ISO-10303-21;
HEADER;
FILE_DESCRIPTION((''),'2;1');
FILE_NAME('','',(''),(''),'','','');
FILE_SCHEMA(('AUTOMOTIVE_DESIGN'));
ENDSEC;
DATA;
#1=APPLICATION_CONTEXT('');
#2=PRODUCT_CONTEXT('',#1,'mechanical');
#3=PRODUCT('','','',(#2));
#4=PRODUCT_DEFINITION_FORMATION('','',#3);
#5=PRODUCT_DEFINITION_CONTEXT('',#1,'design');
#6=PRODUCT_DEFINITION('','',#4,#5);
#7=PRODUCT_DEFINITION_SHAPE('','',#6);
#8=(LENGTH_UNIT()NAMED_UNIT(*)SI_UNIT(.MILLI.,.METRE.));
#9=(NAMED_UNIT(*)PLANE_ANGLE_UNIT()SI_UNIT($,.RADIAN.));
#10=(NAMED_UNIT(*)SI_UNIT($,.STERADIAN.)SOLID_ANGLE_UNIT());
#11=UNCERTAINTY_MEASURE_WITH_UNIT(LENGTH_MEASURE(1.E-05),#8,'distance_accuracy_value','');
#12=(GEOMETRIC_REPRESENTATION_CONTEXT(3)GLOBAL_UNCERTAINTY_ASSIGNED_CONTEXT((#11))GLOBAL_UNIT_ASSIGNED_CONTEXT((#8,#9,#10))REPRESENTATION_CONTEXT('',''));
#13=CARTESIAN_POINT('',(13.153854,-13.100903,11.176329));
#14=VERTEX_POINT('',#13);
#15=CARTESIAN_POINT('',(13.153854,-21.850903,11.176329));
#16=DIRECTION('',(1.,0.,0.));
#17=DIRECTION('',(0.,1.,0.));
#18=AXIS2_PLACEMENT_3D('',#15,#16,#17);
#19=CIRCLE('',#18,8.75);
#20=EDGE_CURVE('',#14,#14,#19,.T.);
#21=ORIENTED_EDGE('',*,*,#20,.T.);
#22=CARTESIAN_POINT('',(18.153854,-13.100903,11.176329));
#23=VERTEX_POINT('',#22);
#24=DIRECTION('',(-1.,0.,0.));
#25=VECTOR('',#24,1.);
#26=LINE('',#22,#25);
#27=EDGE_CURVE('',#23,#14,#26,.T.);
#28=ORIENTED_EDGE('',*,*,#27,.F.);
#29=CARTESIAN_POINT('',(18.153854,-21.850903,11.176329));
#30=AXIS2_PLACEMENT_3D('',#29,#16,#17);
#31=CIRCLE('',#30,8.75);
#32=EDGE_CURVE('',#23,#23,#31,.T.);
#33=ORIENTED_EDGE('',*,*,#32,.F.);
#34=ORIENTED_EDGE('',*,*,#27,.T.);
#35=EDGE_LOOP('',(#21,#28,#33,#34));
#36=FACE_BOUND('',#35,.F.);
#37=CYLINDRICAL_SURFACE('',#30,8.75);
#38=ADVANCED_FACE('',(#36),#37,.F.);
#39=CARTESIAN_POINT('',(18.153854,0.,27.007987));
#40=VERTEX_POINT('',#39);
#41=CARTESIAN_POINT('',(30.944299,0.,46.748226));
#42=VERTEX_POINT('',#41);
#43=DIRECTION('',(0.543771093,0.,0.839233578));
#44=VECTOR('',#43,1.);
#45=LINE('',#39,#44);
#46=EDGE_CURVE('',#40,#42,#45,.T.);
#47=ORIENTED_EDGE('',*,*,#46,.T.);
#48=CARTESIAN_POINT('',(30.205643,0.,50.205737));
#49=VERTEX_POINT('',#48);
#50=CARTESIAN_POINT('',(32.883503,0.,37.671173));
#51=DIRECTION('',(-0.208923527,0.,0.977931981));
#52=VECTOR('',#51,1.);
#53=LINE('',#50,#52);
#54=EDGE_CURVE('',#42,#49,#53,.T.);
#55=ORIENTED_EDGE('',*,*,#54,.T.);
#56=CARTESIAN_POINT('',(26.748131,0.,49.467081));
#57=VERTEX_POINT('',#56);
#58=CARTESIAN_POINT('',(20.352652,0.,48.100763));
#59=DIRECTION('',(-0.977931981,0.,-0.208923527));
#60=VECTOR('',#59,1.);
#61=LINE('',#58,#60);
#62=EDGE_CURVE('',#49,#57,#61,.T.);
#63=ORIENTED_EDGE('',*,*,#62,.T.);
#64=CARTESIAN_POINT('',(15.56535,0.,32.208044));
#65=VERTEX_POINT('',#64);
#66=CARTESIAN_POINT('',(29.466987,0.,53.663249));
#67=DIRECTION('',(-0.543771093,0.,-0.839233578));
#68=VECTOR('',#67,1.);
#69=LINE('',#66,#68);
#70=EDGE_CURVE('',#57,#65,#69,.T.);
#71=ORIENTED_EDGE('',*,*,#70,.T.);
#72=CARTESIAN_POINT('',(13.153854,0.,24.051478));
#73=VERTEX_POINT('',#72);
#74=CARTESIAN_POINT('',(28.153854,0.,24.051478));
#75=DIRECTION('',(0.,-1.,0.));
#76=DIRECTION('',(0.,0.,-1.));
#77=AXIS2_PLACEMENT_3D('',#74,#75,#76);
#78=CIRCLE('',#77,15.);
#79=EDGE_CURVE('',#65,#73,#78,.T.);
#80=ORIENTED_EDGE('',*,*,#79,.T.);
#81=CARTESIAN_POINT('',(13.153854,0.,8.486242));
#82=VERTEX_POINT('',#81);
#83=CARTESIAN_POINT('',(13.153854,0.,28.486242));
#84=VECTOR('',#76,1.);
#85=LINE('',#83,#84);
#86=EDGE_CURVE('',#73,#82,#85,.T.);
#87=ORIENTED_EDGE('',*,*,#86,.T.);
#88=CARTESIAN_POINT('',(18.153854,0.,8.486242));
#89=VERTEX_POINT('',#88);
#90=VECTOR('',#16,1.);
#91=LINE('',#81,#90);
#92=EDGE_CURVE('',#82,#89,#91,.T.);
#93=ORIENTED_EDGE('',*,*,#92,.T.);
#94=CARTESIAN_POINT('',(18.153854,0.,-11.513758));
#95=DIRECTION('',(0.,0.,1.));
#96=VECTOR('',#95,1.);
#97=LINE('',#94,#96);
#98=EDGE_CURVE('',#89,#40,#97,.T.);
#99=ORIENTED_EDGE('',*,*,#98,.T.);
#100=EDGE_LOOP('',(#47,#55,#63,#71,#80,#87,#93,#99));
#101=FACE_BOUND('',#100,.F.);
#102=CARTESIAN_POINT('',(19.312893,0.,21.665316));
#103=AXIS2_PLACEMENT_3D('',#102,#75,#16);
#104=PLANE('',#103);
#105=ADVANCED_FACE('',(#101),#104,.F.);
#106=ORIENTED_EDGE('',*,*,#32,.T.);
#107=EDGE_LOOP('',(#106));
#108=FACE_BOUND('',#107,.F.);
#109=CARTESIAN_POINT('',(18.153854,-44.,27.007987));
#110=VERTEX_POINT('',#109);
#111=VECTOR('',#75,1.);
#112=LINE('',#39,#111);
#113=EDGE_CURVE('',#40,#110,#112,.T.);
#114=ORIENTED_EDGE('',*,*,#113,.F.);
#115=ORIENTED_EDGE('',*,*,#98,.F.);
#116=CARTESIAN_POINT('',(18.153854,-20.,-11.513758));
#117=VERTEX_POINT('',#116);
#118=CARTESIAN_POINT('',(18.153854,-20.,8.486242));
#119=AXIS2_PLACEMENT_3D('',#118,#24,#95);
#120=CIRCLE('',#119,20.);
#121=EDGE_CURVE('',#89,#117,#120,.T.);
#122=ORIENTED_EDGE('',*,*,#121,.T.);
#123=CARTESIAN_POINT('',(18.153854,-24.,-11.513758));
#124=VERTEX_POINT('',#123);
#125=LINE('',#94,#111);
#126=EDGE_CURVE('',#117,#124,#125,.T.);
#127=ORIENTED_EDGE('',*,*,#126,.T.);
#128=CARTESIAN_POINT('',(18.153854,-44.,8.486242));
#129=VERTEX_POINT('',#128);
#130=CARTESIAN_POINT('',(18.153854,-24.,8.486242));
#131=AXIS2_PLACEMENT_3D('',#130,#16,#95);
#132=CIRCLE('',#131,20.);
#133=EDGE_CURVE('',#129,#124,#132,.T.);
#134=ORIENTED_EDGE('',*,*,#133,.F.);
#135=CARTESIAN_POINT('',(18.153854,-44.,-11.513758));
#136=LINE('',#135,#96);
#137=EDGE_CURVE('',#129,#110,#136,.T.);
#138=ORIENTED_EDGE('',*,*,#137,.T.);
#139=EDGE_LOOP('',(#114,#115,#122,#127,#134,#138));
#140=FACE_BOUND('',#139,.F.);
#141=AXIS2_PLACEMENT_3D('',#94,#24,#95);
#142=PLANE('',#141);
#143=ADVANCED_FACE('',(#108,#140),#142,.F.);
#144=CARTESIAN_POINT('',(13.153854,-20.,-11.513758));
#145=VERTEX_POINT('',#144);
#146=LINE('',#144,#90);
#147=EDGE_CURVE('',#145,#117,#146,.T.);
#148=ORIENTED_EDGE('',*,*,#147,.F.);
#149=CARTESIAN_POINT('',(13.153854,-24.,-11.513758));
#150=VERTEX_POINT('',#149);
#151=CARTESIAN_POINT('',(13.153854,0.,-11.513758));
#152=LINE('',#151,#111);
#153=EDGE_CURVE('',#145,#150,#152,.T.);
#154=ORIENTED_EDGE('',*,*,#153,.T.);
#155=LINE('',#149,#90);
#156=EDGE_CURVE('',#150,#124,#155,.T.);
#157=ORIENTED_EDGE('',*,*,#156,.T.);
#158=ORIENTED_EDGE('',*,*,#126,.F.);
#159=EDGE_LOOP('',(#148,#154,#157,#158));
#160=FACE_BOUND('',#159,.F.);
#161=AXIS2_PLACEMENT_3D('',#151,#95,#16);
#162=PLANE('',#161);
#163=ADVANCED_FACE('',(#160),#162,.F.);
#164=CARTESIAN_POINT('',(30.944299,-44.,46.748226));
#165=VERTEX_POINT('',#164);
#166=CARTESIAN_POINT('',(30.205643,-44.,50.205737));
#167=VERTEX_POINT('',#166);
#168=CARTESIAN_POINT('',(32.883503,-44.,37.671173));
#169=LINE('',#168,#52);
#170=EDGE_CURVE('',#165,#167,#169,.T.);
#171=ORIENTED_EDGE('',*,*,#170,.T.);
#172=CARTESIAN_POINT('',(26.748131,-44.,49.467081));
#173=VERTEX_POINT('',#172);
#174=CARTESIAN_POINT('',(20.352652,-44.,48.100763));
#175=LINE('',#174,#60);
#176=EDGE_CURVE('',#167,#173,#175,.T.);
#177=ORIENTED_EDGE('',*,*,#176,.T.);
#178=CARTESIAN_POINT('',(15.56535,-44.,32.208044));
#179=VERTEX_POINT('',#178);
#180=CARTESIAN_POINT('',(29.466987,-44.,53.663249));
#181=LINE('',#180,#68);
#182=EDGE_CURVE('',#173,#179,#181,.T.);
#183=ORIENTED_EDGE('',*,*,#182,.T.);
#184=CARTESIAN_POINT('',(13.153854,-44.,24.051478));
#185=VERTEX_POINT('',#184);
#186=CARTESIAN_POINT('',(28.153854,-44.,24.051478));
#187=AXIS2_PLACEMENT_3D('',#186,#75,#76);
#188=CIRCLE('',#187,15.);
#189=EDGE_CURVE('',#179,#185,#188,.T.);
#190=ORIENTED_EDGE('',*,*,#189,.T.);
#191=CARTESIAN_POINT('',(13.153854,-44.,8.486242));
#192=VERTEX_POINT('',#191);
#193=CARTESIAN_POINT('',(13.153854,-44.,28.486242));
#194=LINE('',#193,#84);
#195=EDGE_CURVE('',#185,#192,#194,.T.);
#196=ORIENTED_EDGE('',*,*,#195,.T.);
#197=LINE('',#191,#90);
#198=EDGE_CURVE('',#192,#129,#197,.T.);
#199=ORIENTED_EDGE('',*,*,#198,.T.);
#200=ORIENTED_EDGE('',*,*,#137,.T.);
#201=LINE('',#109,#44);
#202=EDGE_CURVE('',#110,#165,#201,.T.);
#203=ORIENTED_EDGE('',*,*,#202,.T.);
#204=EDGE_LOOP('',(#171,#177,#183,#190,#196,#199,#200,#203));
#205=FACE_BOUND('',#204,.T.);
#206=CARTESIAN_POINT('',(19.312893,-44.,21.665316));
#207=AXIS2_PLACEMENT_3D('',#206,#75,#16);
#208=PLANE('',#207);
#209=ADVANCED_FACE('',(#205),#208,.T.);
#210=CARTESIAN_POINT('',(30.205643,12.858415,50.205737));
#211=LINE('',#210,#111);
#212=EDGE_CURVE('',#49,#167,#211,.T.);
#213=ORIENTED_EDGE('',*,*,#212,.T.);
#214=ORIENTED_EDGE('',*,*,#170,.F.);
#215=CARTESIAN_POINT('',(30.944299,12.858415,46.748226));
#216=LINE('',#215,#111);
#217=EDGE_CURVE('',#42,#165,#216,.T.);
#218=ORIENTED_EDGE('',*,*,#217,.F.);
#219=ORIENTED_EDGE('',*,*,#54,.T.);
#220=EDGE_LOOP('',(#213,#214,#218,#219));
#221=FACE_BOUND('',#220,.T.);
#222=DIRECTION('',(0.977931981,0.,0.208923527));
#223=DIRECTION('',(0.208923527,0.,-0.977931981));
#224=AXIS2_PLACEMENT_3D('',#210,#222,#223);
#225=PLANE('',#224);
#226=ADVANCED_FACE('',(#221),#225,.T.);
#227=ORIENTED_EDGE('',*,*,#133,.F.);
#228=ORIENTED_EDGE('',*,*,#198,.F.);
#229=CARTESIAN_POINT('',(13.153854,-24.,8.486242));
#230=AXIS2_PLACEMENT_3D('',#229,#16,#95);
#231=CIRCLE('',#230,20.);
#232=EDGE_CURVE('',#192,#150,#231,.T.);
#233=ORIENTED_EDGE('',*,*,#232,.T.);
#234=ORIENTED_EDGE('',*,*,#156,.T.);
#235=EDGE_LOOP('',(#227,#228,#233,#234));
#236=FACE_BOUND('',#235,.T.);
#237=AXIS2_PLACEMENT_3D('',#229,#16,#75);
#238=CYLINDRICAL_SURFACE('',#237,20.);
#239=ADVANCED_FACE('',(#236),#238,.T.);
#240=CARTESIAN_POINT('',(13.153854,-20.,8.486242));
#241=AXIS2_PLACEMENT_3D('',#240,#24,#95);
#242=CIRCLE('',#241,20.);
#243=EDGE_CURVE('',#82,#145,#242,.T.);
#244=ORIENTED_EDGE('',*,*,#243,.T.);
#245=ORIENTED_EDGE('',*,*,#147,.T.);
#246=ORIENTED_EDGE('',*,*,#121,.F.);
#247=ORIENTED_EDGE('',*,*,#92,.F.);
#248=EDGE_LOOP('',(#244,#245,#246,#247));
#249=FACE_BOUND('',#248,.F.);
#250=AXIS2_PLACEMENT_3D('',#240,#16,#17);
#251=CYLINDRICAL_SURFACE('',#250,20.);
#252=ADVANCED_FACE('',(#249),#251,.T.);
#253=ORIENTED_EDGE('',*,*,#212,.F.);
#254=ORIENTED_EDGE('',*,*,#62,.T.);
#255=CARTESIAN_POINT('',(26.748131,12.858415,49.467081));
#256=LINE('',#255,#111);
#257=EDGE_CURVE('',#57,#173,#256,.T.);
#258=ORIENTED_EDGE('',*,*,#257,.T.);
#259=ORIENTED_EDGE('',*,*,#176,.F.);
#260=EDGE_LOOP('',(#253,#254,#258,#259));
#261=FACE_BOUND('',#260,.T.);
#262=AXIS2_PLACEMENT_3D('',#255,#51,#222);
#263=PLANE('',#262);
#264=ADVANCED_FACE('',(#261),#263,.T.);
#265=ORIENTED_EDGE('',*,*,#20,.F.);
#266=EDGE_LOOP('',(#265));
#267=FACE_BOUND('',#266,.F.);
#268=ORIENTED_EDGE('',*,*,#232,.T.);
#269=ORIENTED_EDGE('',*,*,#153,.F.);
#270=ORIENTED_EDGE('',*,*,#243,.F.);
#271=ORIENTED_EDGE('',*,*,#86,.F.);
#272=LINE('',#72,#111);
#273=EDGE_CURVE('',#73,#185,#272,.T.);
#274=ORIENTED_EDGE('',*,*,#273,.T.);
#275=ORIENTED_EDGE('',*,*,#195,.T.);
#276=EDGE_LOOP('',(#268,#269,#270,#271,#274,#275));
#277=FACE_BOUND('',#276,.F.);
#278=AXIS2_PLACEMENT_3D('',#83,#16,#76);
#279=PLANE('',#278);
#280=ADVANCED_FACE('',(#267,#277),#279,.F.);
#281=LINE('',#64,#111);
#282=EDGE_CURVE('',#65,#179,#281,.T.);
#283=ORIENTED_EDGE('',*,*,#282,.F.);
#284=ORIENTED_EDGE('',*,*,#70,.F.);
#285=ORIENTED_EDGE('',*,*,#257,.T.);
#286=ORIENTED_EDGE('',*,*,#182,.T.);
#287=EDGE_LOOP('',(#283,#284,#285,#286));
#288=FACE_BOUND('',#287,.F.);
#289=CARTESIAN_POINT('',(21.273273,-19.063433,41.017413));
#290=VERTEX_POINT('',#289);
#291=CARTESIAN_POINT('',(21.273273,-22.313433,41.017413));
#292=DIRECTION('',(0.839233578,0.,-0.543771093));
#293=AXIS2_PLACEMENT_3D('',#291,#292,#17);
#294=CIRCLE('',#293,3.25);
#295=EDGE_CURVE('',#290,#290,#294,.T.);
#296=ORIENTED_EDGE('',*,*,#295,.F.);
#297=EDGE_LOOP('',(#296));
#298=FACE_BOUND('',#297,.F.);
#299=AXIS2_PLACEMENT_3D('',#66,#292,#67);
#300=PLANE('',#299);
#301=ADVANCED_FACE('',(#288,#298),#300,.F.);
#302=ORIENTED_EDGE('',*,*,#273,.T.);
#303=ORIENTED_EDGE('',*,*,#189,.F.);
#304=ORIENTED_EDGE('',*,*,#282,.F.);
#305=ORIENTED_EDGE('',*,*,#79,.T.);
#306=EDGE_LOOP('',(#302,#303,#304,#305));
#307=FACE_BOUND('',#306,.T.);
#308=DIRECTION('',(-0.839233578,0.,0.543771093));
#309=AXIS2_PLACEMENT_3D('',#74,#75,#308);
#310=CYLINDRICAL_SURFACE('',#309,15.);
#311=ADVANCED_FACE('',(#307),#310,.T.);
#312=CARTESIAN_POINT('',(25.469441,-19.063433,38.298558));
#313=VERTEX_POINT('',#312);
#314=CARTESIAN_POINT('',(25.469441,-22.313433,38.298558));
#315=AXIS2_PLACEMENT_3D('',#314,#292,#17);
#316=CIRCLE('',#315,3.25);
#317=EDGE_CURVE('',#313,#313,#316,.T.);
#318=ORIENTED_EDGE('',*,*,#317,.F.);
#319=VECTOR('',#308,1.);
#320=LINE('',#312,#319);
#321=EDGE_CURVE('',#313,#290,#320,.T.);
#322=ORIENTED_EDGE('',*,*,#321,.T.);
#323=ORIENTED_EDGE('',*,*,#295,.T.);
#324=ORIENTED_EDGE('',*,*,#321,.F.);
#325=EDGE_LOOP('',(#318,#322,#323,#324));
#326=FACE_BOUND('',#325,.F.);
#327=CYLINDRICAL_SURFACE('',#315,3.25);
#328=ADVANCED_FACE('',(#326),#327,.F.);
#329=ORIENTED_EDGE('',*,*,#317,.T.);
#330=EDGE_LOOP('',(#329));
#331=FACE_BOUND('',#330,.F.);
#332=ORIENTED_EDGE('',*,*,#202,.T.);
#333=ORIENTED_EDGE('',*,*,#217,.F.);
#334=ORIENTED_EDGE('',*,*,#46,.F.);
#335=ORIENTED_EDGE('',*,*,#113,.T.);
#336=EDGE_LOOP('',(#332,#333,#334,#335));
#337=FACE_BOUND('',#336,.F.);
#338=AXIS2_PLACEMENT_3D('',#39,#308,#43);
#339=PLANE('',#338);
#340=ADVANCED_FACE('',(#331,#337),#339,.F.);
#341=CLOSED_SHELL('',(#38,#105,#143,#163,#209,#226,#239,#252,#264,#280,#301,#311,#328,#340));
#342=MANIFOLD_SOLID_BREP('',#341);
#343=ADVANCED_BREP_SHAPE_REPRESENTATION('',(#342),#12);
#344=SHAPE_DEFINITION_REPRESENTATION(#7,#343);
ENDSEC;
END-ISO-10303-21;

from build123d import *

# Parameters (mm, degrees)
F1_DEPTH    = 44
F2_R        = 15
F3_T1_DEPTH = 69.7168298797
F4_R        = 20
F5_R        = 8.75
F6_DEPTH    = 25
F7_R        = 3.25
F8_DEPTH    = 25


# Not quite as in the source:
# - a fillet or chamfer that OpenCascade refuses, or shapes differently, is made with other operations: its cross-section is extruded or revolved along the edge and cut away or added


with BuildPart() as f1:
    # F0 (on Front) → F1 (new body)
    with BuildSketch(Plane.XZ):
        Polygon((29.4669866014, 53.6632488984), (13.1538538262, 28.4862415493), (13.1538538262, -11.5137584507), (18.1538538262, -11.5137584507), (18.1538538262, 27.0079869683), (33.6631544929, 50.9443934359), align=None)
    extrude(amount=F1_DEPTH)

    # F2
    f2_edges = [f1.edges().sort_by_distance(p)[0] for p in [
        (13.153854, -22, 28.486242),
    ]]
    fillet(f2_edges, radius=F2_R)

    # F3: chamfer of 5 on 2 edges, made by hand

    # F3_s2 → F3_t1 (cut)
    with BuildSketch(Plane.XZ.offset(-12.8584149398)):
        Polygon((26.7481311389, 49.4670810069), (33.6631544929, 50.9443934359), (29.4669866014, 53.6632488984), align=None)
        Polygon((29.4669866014, 53.6632488984), (30.9442990304, 46.7482255444), (33.6631544929, 50.9443934359), align=None)
    extrude(amount=F3_T1_DEPTH, mode=Mode.SUBTRACT)

    # F4
    f4_edges = [f1.edges().sort_by_distance(p)[0] for p in [
        (15.653854, -44, -11.513758),
        (15.653854, 0, -11.513758),
    ]]
    fillet(f4_edges, radius=F4_R)

    # F5 (on face) → F6 (cut)
    with BuildSketch(Plane.YZ.offset(18.1538538262)):
        with Locations((-21.8509025872, 11.1763291061)):
            Circle(F5_R)
    extrude(amount=-F6_DEPTH, mode=Mode.SUBTRACT)

    # F7 (on face) → F8 (cut)
    with BuildSketch(Plane(origin=(0.4608744572, 0, -0.2986179457), x_dir=(0, 1, 0), z_dir=(0.8392335783, 0, -0.5437710925))):
        with Locations((-22.313432768, 45.9909811616)):
            Circle(F7_R)
    extrude(amount=-F8_DEPTH, mode=Mode.SUBTRACT)


solid = f1.part
